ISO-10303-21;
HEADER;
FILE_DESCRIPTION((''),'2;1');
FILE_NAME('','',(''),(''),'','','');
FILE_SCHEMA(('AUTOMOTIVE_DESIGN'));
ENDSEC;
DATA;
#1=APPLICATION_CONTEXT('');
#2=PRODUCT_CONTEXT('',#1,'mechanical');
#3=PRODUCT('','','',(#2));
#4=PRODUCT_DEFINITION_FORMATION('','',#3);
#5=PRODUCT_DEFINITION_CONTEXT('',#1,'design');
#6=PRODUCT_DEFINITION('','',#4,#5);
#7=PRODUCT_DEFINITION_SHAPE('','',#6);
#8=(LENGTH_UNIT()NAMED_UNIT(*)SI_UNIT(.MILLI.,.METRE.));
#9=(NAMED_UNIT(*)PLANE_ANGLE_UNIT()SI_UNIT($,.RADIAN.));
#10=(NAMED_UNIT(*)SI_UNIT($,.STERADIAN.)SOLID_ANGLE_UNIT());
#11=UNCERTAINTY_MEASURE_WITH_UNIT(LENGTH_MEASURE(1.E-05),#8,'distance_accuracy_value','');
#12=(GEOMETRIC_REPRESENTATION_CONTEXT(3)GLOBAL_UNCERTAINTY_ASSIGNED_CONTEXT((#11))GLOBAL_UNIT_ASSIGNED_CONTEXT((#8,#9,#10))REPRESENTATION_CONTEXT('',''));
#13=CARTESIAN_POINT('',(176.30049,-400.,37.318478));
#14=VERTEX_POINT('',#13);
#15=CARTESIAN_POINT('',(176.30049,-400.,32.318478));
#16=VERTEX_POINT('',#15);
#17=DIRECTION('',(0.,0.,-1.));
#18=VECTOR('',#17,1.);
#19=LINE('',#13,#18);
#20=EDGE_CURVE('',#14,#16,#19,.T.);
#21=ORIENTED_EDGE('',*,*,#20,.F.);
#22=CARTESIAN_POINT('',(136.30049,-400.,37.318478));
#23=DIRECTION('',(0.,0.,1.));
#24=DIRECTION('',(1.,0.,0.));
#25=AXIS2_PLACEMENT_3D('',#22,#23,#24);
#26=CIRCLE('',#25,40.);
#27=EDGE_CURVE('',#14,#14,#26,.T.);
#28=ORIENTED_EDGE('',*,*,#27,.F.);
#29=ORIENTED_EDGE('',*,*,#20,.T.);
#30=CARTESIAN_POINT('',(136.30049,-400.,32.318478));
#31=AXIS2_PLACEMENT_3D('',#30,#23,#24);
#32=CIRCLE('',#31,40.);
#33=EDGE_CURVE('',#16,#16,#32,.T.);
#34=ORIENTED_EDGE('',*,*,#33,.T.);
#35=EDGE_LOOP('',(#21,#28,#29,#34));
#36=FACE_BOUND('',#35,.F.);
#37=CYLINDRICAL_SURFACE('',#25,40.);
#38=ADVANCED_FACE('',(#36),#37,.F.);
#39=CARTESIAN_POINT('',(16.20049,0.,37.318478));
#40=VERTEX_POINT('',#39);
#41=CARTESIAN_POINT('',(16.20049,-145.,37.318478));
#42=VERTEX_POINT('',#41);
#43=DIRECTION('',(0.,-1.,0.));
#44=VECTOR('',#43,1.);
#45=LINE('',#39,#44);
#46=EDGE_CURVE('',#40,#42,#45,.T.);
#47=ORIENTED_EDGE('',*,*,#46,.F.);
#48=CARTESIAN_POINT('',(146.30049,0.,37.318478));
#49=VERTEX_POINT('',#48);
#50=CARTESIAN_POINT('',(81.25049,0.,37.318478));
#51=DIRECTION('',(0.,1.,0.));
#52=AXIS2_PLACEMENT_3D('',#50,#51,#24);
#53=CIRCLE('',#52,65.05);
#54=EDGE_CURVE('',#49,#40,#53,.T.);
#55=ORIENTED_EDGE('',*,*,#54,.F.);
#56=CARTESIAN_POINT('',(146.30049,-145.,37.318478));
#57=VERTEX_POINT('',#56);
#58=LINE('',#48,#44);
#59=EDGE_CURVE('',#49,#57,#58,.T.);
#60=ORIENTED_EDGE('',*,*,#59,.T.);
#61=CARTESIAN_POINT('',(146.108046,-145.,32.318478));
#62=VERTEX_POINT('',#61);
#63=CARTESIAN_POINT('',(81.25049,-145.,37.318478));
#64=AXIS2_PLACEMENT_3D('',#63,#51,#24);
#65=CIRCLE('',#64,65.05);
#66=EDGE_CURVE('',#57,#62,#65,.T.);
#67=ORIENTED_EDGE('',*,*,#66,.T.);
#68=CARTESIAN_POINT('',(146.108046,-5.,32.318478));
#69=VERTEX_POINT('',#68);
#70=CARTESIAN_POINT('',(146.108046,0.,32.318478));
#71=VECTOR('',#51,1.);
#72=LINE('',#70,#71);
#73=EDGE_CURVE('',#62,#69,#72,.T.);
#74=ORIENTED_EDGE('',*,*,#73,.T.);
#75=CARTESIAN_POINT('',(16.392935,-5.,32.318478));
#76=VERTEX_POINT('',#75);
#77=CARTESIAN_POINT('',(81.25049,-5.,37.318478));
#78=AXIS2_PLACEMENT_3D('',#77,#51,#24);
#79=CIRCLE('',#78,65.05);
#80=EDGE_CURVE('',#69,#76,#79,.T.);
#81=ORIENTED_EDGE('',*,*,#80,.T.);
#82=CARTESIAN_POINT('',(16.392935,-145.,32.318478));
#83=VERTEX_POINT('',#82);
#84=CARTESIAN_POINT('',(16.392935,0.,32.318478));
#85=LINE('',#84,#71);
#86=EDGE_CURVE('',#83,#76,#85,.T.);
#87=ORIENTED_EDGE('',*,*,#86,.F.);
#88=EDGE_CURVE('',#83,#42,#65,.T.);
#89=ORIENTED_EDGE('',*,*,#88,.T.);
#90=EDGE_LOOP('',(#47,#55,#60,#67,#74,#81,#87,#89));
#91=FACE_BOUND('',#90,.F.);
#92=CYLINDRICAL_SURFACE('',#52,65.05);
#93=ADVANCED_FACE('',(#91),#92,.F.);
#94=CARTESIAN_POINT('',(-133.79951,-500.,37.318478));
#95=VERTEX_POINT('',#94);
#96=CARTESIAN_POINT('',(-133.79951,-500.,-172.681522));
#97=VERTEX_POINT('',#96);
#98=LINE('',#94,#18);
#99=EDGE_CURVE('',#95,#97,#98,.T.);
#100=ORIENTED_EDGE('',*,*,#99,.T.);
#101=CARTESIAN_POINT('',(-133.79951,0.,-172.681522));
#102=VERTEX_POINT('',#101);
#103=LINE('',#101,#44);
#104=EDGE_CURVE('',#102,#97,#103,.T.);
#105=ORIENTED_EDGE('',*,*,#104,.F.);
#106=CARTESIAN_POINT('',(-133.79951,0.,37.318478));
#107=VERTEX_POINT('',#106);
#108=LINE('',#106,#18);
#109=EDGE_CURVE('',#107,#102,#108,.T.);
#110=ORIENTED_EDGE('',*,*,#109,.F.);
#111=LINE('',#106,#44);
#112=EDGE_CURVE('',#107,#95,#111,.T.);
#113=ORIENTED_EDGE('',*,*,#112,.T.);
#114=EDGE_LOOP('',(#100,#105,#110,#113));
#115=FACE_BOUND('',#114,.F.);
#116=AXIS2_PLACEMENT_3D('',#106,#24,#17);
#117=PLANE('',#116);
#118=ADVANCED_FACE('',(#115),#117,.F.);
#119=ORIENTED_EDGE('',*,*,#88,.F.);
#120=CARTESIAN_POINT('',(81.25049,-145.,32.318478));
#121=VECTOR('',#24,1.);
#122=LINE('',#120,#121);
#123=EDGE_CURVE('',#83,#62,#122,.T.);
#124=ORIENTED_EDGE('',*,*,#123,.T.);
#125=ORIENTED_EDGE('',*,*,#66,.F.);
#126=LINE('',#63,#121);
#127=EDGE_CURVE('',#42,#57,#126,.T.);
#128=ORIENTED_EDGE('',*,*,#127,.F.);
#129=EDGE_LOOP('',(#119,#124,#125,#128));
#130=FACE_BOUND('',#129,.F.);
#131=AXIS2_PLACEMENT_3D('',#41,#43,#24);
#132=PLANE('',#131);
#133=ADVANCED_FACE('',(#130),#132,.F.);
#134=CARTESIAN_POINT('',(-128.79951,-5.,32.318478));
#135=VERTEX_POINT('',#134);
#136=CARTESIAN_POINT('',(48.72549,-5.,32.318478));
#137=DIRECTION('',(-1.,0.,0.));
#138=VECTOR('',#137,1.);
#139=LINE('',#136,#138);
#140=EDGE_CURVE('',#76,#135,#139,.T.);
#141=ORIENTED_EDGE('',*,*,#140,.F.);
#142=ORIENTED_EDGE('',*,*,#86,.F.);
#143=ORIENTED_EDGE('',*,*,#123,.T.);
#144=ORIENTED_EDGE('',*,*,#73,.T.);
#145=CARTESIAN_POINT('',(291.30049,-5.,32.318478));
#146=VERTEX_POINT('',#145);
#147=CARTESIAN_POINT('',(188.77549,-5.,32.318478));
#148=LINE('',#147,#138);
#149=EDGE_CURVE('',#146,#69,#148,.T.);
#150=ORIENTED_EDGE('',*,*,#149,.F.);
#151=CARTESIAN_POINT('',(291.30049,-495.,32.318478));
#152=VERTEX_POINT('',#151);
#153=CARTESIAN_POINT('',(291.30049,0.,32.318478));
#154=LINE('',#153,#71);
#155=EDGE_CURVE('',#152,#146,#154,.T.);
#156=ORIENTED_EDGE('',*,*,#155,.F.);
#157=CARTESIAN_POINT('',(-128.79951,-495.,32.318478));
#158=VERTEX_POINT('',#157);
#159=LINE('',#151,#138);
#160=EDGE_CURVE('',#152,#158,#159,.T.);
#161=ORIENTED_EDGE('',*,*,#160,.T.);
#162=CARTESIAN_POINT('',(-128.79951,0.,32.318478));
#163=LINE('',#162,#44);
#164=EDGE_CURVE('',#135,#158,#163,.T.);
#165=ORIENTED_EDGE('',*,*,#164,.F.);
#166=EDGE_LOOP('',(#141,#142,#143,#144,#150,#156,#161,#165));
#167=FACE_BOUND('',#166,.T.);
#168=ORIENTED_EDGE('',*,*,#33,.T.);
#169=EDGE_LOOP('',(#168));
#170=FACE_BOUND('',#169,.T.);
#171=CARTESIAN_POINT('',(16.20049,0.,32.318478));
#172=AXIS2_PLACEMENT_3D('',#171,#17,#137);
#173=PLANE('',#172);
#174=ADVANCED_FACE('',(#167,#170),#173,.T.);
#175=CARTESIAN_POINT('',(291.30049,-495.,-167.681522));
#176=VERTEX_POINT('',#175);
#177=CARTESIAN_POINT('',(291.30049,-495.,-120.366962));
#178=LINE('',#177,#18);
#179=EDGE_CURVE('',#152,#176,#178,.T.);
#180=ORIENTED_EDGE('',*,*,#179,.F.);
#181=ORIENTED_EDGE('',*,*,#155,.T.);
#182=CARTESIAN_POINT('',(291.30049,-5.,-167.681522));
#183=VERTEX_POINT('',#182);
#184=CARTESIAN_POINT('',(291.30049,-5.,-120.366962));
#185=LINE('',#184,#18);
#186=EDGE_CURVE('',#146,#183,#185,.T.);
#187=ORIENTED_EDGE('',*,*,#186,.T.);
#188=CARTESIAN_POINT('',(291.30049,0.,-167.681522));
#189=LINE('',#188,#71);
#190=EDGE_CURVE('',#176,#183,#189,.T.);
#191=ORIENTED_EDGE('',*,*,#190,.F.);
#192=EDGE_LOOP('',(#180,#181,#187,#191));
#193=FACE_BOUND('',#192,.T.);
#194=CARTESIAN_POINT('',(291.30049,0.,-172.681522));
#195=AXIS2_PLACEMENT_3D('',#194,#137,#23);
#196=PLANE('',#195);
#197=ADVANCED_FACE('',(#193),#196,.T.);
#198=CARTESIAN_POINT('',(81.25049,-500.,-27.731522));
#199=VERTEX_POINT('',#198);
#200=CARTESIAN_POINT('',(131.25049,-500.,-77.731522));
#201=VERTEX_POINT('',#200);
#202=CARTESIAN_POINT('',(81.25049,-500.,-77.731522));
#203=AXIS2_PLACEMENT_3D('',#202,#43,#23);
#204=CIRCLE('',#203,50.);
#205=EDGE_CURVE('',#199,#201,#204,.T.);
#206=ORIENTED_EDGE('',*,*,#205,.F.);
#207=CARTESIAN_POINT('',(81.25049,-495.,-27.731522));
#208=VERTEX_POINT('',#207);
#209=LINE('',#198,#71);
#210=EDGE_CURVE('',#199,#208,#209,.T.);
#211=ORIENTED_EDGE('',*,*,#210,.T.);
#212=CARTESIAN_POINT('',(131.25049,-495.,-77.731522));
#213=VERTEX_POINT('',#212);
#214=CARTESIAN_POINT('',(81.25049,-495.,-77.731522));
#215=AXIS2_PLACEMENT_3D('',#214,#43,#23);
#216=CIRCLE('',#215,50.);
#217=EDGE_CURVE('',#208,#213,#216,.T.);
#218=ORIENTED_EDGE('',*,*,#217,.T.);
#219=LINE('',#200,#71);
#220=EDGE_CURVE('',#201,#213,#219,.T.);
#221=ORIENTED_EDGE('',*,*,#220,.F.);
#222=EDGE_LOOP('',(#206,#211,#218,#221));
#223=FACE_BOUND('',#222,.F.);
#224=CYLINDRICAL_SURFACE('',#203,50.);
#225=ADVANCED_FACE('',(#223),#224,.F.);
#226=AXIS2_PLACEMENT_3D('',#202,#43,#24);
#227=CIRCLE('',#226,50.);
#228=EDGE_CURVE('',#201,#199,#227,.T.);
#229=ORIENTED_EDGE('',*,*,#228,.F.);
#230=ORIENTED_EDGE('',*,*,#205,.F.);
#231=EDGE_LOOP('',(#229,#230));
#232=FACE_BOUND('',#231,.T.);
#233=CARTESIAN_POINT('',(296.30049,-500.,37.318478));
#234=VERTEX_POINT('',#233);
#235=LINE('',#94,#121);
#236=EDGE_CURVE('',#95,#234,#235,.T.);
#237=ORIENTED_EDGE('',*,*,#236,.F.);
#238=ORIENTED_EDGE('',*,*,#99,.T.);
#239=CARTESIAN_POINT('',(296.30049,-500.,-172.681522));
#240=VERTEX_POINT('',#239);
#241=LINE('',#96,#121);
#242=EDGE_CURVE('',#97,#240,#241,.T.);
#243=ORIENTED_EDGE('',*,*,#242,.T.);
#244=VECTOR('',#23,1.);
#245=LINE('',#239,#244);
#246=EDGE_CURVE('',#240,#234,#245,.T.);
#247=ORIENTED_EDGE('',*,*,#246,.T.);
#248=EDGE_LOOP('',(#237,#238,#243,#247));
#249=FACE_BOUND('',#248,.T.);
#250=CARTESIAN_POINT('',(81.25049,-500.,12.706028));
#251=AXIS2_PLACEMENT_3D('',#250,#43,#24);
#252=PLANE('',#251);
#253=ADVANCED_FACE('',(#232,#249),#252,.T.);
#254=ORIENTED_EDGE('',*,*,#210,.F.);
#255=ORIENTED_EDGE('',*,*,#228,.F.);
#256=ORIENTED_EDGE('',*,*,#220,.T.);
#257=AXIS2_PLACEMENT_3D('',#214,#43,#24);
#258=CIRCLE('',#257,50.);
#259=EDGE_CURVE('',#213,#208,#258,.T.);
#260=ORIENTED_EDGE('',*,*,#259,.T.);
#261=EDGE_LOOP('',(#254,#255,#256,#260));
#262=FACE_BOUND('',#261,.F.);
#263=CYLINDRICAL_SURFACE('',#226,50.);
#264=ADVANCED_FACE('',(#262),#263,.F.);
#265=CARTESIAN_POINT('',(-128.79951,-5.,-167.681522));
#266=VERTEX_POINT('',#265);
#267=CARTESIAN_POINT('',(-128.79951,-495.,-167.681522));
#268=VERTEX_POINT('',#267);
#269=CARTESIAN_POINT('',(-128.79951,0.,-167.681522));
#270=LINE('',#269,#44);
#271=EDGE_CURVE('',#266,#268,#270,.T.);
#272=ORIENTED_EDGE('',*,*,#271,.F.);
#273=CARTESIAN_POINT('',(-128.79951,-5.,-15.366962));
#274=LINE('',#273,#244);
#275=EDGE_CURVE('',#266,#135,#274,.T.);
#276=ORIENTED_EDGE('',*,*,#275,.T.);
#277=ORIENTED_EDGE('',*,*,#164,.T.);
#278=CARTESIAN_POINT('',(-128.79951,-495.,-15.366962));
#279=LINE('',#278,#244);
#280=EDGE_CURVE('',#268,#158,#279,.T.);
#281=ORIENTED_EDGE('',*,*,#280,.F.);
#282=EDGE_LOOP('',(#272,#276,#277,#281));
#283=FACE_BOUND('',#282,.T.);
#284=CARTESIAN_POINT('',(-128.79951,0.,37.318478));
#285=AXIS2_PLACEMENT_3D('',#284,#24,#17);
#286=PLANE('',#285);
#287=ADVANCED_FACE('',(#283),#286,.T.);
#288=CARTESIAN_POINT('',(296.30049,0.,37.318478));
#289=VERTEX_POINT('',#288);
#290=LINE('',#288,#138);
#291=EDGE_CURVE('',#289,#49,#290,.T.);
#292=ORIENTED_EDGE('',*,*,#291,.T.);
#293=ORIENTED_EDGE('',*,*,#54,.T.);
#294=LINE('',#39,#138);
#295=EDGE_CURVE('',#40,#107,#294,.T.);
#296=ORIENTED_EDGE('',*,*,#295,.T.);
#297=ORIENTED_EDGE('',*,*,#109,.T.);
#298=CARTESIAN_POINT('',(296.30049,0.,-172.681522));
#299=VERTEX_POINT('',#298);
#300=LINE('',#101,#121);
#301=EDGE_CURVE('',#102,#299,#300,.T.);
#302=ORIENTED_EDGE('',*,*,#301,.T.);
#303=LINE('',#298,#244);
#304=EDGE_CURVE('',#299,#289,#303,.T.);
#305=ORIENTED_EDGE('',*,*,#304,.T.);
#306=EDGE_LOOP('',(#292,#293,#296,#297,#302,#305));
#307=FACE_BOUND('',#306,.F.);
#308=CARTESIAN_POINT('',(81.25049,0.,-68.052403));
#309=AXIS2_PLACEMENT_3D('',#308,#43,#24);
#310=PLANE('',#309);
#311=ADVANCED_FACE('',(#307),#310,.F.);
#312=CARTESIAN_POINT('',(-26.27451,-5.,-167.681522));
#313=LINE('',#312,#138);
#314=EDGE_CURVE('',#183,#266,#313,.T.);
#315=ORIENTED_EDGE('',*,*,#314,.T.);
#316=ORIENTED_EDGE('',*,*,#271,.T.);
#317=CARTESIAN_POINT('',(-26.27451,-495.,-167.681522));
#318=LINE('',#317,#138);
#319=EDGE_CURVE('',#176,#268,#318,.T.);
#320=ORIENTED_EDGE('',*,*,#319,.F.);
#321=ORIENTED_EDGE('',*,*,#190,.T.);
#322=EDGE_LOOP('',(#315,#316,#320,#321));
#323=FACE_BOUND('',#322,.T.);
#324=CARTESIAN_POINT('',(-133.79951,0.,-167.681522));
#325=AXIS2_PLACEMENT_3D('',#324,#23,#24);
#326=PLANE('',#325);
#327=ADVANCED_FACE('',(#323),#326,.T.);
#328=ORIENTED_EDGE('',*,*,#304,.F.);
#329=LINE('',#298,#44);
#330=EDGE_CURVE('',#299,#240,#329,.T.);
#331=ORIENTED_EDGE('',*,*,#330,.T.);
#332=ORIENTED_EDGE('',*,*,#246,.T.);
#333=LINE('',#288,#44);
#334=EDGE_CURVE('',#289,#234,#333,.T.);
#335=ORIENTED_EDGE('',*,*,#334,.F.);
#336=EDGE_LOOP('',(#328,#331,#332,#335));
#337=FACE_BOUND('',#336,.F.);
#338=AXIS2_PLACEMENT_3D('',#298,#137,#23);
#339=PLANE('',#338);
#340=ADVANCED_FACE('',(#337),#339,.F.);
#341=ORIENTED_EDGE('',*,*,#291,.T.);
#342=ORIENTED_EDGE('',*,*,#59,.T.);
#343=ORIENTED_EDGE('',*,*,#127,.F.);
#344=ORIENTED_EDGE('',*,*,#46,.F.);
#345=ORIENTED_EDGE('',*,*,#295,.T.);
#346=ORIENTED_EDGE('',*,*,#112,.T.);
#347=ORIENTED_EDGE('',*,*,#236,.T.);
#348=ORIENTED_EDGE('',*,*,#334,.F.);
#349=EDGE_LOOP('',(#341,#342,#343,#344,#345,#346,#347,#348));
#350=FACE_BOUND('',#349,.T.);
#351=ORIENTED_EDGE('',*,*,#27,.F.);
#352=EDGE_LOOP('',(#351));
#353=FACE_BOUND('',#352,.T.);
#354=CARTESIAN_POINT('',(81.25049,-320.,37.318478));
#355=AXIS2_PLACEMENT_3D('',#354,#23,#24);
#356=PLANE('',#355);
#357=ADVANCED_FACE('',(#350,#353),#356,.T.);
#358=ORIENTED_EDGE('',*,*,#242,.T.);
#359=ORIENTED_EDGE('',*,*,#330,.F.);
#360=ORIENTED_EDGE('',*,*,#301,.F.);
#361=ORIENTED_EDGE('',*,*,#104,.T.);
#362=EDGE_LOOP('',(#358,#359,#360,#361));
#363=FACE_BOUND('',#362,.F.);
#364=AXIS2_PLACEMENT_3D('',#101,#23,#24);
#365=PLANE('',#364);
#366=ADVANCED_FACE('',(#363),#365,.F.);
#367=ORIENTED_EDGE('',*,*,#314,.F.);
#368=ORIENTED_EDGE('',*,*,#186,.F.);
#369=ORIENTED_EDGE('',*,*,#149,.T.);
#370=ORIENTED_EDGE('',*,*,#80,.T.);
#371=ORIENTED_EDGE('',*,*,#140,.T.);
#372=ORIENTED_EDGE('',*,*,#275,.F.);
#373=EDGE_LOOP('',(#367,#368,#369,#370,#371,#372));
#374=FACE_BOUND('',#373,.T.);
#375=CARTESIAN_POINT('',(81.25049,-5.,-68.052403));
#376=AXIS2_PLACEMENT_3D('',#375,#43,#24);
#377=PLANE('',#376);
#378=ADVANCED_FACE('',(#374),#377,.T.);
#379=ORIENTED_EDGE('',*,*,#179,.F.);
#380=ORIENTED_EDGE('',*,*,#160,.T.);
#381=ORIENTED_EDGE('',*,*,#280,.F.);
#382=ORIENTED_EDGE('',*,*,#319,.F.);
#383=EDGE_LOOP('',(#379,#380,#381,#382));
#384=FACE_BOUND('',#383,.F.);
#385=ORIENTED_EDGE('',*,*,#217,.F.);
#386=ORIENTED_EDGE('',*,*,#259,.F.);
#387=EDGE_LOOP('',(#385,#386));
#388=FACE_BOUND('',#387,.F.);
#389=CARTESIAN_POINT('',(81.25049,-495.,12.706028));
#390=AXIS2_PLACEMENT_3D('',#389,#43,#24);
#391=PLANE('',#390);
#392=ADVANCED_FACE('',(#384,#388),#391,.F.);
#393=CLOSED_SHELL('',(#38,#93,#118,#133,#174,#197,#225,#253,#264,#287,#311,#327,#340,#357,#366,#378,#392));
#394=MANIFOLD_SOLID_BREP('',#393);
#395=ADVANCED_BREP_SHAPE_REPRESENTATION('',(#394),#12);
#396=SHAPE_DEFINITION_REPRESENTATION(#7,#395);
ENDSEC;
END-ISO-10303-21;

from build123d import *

# Parameters (mm, degrees)
F1_DEPTH = 500
F2_T     = -5
F4_DEPTH = 5
F5_DEPTH = 10
F6_W     = 130.1
F6_H     = 350
F7_DEPTH = 5
F8_R     = 40
F9_DEPTH = 25


# Not quite as in the source:
# - a feature names something its author has since deleted; it is built from what else it names


with BuildPart() as f1:
    # F0 (on Front) → F1 (new body)
    with BuildSketch(Plane.XZ):
        with BuildLine():
            Line((-133.7995099491, 37.318477902), (-133.7995099491, -172.681522098))
            Line((-133.7995099491, -172.681522098), (296.3004900509, -172.681522098))
            Line((296.3004900509, -172.681522098), (296.3004900509, 37.318477902))
            Line((296.3004900509, 37.318477902), (146.3004900509, 37.318477902))
            ThreePointArc((146.3004900509, 37.318477902), (81.2504900509, -27.731522098), (16.2004900509, 37.318477902))
            Line((16.2004900509, 37.318477902), (-133.7995099491, 37.318477902))
        make_face()
    extrude(amount=F1_DEPTH)

    # F2
    f2_openings = [f1.faces().sort_by_distance(p)[0] for p in [
        (81.25049, -250, -27.731522),
    ]]
    offset(amount=F2_T, openings=f2_openings)

    # F3 (on face) → F4 (join)
    with BuildSketch(Plane.XZ.offset(500)):
        with BuildLine():
            Line((146.3004900509, 37.318477902), (16.2004900509, 37.318477902))
            ThreePointArc((16.2004900509, 37.318477902), (35.2531939347, -8.6788182142), (81.2504900509, -27.731522098))
            ThreePointArc((81.2504900509, -27.731522098), (127.2477861671, -8.6788182142), (146.3004900509, 37.318477902))
        make_face()
    extrude(amount=-F4_DEPTH)

    # F3 (on face) → F5 (cut)
    with BuildSketch(Plane.XZ.offset(500)):
        with BuildLine():
            ThreePointArc((81.2504900509, -27.731522098), (45.8951509916, -113.0868611574), (131.2504900509, -77.731522098))
            ThreePointArc((131.2504900509, -77.731522098), (116.6058291102, -42.3761830387), (81.2504900509, -27.731522098))
        make_face()
    extrude(amount=-F5_DEPTH, mode=Mode.SUBTRACT)

    # F6 (on face) → F7 (join)
    with BuildSketch(Plane.XY.offset(37.318477902)):
        with Locations((81.2504900509, -320)):
            Rectangle(F6_W, F6_H)
    extrude(amount=-F7_DEPTH)

    # F8 (on face) → F9 (cut)
    with BuildSketch(Plane.XY.offset(37.318477902)):
        with Locations((136.3004900509, -400)):
            Circle(F8_R)
    extrude(amount=-F9_DEPTH, mode=Mode.SUBTRACT)


solid = f1.part
